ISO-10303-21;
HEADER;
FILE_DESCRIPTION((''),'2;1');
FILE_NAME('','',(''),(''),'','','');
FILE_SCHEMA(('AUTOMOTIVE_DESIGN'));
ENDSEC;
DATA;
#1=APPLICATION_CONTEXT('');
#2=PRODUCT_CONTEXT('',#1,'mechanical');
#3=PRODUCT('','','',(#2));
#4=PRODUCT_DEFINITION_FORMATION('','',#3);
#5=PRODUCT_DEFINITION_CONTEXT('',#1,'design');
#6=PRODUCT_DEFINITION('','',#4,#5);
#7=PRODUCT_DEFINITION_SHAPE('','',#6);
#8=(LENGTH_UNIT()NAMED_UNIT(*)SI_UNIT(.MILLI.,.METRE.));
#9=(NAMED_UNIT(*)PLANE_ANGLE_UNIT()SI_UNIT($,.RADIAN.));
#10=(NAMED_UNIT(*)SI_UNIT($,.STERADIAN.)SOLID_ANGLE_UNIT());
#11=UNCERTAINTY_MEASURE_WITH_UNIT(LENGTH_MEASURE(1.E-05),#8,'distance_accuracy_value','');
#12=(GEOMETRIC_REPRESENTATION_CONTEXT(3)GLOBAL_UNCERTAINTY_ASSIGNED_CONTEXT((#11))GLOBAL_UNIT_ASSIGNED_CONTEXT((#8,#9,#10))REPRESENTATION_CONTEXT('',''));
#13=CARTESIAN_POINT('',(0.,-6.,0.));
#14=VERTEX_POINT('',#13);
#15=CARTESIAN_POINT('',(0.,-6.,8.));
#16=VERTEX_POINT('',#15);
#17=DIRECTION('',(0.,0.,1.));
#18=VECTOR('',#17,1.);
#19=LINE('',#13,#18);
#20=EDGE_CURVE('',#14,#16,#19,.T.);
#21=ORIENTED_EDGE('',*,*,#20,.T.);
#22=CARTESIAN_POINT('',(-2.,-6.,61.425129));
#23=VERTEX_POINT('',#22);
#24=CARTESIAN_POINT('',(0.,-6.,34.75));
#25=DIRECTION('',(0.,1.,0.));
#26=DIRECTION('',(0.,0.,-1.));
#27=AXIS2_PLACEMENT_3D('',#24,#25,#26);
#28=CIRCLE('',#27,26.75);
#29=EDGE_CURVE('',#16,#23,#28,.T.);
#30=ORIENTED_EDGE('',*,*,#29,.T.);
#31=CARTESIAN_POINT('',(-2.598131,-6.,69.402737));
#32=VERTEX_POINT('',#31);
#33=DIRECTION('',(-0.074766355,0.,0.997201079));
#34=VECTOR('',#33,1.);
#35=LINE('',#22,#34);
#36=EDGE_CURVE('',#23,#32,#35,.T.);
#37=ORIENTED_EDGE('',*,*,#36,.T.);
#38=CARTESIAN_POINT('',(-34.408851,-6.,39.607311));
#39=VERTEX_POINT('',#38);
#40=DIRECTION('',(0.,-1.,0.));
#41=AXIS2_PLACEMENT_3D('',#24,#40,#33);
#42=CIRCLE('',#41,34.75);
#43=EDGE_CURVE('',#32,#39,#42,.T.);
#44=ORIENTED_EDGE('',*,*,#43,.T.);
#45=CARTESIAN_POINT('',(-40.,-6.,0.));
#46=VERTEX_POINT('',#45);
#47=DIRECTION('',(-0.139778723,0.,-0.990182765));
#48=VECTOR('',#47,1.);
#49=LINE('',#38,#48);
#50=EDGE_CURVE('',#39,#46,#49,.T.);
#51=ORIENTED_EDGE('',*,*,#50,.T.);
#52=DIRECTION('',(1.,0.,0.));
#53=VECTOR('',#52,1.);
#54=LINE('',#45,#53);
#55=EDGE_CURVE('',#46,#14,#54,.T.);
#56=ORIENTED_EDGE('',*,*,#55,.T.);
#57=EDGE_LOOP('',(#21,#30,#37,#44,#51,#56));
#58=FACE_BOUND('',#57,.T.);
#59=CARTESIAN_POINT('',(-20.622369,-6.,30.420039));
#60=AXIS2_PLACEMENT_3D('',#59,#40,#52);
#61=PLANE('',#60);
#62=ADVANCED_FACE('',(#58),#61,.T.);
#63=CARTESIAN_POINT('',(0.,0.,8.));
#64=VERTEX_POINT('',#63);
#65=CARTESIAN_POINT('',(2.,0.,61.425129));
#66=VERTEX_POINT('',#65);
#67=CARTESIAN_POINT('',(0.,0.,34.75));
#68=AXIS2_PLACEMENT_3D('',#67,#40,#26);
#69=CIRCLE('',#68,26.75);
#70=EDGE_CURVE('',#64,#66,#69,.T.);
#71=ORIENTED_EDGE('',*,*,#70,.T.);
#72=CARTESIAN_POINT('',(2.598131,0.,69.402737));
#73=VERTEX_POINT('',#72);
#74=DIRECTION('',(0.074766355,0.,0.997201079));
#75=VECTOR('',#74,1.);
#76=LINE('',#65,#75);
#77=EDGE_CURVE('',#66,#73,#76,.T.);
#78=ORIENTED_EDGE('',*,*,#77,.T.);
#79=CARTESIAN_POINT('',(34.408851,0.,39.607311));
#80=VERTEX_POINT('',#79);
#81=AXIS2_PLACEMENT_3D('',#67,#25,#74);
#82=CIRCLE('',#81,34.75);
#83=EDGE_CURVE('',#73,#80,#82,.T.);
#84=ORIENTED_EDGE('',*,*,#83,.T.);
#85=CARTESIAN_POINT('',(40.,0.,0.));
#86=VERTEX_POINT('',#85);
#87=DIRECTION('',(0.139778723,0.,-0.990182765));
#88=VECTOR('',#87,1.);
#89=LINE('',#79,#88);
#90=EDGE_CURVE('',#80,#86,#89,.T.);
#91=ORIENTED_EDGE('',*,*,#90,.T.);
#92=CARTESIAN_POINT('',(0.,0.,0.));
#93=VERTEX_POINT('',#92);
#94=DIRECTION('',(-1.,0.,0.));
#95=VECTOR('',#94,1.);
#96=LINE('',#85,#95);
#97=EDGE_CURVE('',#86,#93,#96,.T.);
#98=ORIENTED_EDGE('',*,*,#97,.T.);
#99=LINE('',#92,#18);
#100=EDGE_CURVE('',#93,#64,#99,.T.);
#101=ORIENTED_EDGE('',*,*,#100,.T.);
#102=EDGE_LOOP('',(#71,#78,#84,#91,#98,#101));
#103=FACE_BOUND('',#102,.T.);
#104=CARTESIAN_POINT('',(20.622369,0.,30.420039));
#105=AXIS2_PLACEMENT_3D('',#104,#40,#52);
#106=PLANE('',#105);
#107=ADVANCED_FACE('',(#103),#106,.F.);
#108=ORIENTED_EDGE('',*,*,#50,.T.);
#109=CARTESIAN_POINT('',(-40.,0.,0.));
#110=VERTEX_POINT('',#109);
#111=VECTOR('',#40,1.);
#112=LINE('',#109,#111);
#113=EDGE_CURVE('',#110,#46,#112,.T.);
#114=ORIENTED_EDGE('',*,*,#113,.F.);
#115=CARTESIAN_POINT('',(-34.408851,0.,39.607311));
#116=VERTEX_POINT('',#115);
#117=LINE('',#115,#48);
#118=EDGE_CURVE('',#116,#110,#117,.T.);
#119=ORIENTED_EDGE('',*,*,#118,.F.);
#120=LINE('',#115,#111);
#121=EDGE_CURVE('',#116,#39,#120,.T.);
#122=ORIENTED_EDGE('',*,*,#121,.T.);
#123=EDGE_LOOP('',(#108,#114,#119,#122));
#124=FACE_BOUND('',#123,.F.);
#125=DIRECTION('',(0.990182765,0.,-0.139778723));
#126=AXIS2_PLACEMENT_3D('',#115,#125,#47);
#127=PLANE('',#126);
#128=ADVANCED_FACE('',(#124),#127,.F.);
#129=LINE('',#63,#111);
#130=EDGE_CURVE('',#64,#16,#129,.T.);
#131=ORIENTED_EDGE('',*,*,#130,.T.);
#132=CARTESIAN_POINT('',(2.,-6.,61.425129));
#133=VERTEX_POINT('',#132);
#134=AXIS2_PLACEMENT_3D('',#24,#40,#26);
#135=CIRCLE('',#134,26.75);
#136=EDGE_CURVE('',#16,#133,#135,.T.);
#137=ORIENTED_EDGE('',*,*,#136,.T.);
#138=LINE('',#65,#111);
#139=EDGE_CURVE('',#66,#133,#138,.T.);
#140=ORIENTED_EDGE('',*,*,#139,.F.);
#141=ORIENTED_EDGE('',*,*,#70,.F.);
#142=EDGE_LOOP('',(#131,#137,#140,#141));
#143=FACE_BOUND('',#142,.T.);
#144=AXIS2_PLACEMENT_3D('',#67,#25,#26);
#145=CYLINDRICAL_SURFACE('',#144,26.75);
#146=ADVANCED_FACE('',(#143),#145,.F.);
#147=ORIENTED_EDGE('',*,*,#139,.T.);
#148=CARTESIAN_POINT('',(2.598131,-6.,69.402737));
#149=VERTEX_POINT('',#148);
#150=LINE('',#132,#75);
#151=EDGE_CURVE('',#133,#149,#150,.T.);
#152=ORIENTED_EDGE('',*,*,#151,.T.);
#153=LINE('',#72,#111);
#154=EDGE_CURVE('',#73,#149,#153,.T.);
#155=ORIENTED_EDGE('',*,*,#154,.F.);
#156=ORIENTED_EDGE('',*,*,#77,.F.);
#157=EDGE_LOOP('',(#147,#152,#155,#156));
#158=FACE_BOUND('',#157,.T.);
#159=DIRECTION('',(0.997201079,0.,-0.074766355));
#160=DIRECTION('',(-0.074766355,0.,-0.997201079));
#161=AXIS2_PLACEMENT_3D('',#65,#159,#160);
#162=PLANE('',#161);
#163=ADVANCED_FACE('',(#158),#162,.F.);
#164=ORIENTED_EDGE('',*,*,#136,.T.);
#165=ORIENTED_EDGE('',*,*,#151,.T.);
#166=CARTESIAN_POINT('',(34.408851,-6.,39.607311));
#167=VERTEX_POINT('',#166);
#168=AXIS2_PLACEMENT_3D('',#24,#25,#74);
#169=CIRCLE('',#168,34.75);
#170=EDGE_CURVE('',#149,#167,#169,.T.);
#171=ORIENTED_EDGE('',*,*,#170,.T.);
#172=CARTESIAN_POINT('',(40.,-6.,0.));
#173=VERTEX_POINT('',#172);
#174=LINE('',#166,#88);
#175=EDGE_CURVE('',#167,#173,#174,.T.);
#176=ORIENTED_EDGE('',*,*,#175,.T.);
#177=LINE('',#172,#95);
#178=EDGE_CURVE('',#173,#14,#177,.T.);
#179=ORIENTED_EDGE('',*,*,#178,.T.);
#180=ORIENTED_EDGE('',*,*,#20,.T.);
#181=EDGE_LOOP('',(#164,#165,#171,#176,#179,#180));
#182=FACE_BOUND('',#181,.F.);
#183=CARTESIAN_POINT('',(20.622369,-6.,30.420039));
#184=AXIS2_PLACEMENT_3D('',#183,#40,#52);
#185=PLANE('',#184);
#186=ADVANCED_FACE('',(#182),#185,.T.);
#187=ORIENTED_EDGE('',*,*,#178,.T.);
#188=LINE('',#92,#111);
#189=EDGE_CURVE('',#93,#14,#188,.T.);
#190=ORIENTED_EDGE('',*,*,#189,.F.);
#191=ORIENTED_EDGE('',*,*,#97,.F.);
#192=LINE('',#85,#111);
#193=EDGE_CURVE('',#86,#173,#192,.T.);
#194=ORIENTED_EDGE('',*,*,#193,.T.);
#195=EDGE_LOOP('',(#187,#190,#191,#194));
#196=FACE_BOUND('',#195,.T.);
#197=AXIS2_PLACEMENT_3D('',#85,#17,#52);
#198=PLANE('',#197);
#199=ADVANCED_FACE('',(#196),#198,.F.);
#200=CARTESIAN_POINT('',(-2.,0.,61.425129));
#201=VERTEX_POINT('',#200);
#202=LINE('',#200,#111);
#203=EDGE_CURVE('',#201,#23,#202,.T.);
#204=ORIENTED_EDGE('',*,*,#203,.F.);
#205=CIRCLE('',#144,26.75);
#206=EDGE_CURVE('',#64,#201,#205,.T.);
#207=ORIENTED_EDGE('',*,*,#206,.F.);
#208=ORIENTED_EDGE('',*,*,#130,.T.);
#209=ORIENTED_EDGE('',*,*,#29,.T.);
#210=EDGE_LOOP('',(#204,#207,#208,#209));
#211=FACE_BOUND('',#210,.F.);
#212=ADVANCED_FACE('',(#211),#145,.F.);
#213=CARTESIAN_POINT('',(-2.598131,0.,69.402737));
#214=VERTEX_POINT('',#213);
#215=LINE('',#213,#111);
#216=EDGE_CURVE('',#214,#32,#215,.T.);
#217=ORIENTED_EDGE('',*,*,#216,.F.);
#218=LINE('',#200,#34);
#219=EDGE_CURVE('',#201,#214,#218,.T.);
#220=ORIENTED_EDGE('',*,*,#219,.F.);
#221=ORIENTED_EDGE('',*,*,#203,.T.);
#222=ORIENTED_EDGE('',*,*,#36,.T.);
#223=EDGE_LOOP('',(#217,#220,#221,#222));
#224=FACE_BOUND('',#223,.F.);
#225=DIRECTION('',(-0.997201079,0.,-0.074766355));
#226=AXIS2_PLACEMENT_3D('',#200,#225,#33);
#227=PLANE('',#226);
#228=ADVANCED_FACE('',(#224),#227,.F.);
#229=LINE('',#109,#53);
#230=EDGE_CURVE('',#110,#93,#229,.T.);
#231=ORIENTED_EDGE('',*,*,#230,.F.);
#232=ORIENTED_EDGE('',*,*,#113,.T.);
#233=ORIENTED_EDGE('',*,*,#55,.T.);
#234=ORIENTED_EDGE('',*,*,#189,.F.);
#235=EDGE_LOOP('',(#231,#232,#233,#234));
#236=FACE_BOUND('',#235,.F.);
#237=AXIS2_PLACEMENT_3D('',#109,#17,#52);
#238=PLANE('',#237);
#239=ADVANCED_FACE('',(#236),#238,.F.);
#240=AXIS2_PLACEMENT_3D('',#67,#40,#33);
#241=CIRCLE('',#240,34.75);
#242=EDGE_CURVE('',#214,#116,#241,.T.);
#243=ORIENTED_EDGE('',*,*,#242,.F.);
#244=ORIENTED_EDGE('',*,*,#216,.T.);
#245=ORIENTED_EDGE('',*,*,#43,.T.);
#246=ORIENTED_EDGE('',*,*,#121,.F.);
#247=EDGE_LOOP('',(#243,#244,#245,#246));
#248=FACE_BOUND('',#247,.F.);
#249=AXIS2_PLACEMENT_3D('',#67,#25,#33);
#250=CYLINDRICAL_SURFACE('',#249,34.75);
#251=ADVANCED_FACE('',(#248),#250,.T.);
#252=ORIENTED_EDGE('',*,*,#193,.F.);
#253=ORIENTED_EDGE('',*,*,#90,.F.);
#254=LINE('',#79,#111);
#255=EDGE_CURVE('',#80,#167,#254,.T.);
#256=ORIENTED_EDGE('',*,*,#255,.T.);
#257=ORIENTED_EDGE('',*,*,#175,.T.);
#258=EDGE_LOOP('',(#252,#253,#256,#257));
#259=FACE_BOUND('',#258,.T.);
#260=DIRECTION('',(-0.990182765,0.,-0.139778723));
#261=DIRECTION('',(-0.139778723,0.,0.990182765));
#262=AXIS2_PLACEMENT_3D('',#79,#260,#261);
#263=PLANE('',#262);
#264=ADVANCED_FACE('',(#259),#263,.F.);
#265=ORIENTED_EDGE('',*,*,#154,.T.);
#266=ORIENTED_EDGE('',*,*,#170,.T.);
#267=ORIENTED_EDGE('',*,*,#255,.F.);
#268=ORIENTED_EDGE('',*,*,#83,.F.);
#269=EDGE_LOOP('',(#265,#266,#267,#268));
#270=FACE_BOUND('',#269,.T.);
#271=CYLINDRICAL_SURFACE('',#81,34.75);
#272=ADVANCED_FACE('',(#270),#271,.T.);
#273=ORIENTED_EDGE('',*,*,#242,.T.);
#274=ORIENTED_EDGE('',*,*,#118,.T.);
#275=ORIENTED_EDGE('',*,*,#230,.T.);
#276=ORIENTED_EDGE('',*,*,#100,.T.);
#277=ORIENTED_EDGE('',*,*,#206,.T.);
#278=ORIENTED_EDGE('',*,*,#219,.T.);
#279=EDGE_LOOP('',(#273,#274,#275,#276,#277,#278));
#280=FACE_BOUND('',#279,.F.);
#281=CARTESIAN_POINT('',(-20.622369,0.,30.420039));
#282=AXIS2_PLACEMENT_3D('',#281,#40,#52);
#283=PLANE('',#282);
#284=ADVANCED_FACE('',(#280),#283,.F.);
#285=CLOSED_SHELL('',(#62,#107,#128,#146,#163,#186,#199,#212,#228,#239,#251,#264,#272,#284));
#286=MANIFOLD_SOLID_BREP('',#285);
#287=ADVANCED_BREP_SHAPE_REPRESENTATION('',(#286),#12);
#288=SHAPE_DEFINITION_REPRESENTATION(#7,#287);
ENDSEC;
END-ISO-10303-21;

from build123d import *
from build123d import SkipClean  # not in build123d's __all__

# Parameters (mm, degrees)
F1_DEPTH = 6


with BuildPart() as f1:
    # F0 (on Front) → F1 (new body)
    with BuildSketch(Plane.XZ):
        with BuildLine():
            ThreePointArc((-2.5981308411, 69.4027374984), (-23.7554424043, 60.1122052703), (-34.4088510941, 39.607310612))
            Line((-34.4088510941, 39.607310612), (-40, 0))
            Line((-40, 0), (0, 0))
            Line((0, 0), (0, 8))
            ThreePointArc((0, 8), (-26.7312756631, 33.7492995345), (-2, 61.4251288657))
            Line((-2, 61.4251288657), (-2.5981308411, 69.4027374984))
        make_face()
    extrude(amount=F1_DEPTH)

    # F2: F1 across plane


with BuildPart() as f1_1:
    add(f1.part, clean=False)
    with SkipClean():  # cleaning this boolean's faces spoils the solid; the shape is the same uncleaned
        add(f1.part.mirror(Plane.YZ), clean=False)


solid = f1_1.part
